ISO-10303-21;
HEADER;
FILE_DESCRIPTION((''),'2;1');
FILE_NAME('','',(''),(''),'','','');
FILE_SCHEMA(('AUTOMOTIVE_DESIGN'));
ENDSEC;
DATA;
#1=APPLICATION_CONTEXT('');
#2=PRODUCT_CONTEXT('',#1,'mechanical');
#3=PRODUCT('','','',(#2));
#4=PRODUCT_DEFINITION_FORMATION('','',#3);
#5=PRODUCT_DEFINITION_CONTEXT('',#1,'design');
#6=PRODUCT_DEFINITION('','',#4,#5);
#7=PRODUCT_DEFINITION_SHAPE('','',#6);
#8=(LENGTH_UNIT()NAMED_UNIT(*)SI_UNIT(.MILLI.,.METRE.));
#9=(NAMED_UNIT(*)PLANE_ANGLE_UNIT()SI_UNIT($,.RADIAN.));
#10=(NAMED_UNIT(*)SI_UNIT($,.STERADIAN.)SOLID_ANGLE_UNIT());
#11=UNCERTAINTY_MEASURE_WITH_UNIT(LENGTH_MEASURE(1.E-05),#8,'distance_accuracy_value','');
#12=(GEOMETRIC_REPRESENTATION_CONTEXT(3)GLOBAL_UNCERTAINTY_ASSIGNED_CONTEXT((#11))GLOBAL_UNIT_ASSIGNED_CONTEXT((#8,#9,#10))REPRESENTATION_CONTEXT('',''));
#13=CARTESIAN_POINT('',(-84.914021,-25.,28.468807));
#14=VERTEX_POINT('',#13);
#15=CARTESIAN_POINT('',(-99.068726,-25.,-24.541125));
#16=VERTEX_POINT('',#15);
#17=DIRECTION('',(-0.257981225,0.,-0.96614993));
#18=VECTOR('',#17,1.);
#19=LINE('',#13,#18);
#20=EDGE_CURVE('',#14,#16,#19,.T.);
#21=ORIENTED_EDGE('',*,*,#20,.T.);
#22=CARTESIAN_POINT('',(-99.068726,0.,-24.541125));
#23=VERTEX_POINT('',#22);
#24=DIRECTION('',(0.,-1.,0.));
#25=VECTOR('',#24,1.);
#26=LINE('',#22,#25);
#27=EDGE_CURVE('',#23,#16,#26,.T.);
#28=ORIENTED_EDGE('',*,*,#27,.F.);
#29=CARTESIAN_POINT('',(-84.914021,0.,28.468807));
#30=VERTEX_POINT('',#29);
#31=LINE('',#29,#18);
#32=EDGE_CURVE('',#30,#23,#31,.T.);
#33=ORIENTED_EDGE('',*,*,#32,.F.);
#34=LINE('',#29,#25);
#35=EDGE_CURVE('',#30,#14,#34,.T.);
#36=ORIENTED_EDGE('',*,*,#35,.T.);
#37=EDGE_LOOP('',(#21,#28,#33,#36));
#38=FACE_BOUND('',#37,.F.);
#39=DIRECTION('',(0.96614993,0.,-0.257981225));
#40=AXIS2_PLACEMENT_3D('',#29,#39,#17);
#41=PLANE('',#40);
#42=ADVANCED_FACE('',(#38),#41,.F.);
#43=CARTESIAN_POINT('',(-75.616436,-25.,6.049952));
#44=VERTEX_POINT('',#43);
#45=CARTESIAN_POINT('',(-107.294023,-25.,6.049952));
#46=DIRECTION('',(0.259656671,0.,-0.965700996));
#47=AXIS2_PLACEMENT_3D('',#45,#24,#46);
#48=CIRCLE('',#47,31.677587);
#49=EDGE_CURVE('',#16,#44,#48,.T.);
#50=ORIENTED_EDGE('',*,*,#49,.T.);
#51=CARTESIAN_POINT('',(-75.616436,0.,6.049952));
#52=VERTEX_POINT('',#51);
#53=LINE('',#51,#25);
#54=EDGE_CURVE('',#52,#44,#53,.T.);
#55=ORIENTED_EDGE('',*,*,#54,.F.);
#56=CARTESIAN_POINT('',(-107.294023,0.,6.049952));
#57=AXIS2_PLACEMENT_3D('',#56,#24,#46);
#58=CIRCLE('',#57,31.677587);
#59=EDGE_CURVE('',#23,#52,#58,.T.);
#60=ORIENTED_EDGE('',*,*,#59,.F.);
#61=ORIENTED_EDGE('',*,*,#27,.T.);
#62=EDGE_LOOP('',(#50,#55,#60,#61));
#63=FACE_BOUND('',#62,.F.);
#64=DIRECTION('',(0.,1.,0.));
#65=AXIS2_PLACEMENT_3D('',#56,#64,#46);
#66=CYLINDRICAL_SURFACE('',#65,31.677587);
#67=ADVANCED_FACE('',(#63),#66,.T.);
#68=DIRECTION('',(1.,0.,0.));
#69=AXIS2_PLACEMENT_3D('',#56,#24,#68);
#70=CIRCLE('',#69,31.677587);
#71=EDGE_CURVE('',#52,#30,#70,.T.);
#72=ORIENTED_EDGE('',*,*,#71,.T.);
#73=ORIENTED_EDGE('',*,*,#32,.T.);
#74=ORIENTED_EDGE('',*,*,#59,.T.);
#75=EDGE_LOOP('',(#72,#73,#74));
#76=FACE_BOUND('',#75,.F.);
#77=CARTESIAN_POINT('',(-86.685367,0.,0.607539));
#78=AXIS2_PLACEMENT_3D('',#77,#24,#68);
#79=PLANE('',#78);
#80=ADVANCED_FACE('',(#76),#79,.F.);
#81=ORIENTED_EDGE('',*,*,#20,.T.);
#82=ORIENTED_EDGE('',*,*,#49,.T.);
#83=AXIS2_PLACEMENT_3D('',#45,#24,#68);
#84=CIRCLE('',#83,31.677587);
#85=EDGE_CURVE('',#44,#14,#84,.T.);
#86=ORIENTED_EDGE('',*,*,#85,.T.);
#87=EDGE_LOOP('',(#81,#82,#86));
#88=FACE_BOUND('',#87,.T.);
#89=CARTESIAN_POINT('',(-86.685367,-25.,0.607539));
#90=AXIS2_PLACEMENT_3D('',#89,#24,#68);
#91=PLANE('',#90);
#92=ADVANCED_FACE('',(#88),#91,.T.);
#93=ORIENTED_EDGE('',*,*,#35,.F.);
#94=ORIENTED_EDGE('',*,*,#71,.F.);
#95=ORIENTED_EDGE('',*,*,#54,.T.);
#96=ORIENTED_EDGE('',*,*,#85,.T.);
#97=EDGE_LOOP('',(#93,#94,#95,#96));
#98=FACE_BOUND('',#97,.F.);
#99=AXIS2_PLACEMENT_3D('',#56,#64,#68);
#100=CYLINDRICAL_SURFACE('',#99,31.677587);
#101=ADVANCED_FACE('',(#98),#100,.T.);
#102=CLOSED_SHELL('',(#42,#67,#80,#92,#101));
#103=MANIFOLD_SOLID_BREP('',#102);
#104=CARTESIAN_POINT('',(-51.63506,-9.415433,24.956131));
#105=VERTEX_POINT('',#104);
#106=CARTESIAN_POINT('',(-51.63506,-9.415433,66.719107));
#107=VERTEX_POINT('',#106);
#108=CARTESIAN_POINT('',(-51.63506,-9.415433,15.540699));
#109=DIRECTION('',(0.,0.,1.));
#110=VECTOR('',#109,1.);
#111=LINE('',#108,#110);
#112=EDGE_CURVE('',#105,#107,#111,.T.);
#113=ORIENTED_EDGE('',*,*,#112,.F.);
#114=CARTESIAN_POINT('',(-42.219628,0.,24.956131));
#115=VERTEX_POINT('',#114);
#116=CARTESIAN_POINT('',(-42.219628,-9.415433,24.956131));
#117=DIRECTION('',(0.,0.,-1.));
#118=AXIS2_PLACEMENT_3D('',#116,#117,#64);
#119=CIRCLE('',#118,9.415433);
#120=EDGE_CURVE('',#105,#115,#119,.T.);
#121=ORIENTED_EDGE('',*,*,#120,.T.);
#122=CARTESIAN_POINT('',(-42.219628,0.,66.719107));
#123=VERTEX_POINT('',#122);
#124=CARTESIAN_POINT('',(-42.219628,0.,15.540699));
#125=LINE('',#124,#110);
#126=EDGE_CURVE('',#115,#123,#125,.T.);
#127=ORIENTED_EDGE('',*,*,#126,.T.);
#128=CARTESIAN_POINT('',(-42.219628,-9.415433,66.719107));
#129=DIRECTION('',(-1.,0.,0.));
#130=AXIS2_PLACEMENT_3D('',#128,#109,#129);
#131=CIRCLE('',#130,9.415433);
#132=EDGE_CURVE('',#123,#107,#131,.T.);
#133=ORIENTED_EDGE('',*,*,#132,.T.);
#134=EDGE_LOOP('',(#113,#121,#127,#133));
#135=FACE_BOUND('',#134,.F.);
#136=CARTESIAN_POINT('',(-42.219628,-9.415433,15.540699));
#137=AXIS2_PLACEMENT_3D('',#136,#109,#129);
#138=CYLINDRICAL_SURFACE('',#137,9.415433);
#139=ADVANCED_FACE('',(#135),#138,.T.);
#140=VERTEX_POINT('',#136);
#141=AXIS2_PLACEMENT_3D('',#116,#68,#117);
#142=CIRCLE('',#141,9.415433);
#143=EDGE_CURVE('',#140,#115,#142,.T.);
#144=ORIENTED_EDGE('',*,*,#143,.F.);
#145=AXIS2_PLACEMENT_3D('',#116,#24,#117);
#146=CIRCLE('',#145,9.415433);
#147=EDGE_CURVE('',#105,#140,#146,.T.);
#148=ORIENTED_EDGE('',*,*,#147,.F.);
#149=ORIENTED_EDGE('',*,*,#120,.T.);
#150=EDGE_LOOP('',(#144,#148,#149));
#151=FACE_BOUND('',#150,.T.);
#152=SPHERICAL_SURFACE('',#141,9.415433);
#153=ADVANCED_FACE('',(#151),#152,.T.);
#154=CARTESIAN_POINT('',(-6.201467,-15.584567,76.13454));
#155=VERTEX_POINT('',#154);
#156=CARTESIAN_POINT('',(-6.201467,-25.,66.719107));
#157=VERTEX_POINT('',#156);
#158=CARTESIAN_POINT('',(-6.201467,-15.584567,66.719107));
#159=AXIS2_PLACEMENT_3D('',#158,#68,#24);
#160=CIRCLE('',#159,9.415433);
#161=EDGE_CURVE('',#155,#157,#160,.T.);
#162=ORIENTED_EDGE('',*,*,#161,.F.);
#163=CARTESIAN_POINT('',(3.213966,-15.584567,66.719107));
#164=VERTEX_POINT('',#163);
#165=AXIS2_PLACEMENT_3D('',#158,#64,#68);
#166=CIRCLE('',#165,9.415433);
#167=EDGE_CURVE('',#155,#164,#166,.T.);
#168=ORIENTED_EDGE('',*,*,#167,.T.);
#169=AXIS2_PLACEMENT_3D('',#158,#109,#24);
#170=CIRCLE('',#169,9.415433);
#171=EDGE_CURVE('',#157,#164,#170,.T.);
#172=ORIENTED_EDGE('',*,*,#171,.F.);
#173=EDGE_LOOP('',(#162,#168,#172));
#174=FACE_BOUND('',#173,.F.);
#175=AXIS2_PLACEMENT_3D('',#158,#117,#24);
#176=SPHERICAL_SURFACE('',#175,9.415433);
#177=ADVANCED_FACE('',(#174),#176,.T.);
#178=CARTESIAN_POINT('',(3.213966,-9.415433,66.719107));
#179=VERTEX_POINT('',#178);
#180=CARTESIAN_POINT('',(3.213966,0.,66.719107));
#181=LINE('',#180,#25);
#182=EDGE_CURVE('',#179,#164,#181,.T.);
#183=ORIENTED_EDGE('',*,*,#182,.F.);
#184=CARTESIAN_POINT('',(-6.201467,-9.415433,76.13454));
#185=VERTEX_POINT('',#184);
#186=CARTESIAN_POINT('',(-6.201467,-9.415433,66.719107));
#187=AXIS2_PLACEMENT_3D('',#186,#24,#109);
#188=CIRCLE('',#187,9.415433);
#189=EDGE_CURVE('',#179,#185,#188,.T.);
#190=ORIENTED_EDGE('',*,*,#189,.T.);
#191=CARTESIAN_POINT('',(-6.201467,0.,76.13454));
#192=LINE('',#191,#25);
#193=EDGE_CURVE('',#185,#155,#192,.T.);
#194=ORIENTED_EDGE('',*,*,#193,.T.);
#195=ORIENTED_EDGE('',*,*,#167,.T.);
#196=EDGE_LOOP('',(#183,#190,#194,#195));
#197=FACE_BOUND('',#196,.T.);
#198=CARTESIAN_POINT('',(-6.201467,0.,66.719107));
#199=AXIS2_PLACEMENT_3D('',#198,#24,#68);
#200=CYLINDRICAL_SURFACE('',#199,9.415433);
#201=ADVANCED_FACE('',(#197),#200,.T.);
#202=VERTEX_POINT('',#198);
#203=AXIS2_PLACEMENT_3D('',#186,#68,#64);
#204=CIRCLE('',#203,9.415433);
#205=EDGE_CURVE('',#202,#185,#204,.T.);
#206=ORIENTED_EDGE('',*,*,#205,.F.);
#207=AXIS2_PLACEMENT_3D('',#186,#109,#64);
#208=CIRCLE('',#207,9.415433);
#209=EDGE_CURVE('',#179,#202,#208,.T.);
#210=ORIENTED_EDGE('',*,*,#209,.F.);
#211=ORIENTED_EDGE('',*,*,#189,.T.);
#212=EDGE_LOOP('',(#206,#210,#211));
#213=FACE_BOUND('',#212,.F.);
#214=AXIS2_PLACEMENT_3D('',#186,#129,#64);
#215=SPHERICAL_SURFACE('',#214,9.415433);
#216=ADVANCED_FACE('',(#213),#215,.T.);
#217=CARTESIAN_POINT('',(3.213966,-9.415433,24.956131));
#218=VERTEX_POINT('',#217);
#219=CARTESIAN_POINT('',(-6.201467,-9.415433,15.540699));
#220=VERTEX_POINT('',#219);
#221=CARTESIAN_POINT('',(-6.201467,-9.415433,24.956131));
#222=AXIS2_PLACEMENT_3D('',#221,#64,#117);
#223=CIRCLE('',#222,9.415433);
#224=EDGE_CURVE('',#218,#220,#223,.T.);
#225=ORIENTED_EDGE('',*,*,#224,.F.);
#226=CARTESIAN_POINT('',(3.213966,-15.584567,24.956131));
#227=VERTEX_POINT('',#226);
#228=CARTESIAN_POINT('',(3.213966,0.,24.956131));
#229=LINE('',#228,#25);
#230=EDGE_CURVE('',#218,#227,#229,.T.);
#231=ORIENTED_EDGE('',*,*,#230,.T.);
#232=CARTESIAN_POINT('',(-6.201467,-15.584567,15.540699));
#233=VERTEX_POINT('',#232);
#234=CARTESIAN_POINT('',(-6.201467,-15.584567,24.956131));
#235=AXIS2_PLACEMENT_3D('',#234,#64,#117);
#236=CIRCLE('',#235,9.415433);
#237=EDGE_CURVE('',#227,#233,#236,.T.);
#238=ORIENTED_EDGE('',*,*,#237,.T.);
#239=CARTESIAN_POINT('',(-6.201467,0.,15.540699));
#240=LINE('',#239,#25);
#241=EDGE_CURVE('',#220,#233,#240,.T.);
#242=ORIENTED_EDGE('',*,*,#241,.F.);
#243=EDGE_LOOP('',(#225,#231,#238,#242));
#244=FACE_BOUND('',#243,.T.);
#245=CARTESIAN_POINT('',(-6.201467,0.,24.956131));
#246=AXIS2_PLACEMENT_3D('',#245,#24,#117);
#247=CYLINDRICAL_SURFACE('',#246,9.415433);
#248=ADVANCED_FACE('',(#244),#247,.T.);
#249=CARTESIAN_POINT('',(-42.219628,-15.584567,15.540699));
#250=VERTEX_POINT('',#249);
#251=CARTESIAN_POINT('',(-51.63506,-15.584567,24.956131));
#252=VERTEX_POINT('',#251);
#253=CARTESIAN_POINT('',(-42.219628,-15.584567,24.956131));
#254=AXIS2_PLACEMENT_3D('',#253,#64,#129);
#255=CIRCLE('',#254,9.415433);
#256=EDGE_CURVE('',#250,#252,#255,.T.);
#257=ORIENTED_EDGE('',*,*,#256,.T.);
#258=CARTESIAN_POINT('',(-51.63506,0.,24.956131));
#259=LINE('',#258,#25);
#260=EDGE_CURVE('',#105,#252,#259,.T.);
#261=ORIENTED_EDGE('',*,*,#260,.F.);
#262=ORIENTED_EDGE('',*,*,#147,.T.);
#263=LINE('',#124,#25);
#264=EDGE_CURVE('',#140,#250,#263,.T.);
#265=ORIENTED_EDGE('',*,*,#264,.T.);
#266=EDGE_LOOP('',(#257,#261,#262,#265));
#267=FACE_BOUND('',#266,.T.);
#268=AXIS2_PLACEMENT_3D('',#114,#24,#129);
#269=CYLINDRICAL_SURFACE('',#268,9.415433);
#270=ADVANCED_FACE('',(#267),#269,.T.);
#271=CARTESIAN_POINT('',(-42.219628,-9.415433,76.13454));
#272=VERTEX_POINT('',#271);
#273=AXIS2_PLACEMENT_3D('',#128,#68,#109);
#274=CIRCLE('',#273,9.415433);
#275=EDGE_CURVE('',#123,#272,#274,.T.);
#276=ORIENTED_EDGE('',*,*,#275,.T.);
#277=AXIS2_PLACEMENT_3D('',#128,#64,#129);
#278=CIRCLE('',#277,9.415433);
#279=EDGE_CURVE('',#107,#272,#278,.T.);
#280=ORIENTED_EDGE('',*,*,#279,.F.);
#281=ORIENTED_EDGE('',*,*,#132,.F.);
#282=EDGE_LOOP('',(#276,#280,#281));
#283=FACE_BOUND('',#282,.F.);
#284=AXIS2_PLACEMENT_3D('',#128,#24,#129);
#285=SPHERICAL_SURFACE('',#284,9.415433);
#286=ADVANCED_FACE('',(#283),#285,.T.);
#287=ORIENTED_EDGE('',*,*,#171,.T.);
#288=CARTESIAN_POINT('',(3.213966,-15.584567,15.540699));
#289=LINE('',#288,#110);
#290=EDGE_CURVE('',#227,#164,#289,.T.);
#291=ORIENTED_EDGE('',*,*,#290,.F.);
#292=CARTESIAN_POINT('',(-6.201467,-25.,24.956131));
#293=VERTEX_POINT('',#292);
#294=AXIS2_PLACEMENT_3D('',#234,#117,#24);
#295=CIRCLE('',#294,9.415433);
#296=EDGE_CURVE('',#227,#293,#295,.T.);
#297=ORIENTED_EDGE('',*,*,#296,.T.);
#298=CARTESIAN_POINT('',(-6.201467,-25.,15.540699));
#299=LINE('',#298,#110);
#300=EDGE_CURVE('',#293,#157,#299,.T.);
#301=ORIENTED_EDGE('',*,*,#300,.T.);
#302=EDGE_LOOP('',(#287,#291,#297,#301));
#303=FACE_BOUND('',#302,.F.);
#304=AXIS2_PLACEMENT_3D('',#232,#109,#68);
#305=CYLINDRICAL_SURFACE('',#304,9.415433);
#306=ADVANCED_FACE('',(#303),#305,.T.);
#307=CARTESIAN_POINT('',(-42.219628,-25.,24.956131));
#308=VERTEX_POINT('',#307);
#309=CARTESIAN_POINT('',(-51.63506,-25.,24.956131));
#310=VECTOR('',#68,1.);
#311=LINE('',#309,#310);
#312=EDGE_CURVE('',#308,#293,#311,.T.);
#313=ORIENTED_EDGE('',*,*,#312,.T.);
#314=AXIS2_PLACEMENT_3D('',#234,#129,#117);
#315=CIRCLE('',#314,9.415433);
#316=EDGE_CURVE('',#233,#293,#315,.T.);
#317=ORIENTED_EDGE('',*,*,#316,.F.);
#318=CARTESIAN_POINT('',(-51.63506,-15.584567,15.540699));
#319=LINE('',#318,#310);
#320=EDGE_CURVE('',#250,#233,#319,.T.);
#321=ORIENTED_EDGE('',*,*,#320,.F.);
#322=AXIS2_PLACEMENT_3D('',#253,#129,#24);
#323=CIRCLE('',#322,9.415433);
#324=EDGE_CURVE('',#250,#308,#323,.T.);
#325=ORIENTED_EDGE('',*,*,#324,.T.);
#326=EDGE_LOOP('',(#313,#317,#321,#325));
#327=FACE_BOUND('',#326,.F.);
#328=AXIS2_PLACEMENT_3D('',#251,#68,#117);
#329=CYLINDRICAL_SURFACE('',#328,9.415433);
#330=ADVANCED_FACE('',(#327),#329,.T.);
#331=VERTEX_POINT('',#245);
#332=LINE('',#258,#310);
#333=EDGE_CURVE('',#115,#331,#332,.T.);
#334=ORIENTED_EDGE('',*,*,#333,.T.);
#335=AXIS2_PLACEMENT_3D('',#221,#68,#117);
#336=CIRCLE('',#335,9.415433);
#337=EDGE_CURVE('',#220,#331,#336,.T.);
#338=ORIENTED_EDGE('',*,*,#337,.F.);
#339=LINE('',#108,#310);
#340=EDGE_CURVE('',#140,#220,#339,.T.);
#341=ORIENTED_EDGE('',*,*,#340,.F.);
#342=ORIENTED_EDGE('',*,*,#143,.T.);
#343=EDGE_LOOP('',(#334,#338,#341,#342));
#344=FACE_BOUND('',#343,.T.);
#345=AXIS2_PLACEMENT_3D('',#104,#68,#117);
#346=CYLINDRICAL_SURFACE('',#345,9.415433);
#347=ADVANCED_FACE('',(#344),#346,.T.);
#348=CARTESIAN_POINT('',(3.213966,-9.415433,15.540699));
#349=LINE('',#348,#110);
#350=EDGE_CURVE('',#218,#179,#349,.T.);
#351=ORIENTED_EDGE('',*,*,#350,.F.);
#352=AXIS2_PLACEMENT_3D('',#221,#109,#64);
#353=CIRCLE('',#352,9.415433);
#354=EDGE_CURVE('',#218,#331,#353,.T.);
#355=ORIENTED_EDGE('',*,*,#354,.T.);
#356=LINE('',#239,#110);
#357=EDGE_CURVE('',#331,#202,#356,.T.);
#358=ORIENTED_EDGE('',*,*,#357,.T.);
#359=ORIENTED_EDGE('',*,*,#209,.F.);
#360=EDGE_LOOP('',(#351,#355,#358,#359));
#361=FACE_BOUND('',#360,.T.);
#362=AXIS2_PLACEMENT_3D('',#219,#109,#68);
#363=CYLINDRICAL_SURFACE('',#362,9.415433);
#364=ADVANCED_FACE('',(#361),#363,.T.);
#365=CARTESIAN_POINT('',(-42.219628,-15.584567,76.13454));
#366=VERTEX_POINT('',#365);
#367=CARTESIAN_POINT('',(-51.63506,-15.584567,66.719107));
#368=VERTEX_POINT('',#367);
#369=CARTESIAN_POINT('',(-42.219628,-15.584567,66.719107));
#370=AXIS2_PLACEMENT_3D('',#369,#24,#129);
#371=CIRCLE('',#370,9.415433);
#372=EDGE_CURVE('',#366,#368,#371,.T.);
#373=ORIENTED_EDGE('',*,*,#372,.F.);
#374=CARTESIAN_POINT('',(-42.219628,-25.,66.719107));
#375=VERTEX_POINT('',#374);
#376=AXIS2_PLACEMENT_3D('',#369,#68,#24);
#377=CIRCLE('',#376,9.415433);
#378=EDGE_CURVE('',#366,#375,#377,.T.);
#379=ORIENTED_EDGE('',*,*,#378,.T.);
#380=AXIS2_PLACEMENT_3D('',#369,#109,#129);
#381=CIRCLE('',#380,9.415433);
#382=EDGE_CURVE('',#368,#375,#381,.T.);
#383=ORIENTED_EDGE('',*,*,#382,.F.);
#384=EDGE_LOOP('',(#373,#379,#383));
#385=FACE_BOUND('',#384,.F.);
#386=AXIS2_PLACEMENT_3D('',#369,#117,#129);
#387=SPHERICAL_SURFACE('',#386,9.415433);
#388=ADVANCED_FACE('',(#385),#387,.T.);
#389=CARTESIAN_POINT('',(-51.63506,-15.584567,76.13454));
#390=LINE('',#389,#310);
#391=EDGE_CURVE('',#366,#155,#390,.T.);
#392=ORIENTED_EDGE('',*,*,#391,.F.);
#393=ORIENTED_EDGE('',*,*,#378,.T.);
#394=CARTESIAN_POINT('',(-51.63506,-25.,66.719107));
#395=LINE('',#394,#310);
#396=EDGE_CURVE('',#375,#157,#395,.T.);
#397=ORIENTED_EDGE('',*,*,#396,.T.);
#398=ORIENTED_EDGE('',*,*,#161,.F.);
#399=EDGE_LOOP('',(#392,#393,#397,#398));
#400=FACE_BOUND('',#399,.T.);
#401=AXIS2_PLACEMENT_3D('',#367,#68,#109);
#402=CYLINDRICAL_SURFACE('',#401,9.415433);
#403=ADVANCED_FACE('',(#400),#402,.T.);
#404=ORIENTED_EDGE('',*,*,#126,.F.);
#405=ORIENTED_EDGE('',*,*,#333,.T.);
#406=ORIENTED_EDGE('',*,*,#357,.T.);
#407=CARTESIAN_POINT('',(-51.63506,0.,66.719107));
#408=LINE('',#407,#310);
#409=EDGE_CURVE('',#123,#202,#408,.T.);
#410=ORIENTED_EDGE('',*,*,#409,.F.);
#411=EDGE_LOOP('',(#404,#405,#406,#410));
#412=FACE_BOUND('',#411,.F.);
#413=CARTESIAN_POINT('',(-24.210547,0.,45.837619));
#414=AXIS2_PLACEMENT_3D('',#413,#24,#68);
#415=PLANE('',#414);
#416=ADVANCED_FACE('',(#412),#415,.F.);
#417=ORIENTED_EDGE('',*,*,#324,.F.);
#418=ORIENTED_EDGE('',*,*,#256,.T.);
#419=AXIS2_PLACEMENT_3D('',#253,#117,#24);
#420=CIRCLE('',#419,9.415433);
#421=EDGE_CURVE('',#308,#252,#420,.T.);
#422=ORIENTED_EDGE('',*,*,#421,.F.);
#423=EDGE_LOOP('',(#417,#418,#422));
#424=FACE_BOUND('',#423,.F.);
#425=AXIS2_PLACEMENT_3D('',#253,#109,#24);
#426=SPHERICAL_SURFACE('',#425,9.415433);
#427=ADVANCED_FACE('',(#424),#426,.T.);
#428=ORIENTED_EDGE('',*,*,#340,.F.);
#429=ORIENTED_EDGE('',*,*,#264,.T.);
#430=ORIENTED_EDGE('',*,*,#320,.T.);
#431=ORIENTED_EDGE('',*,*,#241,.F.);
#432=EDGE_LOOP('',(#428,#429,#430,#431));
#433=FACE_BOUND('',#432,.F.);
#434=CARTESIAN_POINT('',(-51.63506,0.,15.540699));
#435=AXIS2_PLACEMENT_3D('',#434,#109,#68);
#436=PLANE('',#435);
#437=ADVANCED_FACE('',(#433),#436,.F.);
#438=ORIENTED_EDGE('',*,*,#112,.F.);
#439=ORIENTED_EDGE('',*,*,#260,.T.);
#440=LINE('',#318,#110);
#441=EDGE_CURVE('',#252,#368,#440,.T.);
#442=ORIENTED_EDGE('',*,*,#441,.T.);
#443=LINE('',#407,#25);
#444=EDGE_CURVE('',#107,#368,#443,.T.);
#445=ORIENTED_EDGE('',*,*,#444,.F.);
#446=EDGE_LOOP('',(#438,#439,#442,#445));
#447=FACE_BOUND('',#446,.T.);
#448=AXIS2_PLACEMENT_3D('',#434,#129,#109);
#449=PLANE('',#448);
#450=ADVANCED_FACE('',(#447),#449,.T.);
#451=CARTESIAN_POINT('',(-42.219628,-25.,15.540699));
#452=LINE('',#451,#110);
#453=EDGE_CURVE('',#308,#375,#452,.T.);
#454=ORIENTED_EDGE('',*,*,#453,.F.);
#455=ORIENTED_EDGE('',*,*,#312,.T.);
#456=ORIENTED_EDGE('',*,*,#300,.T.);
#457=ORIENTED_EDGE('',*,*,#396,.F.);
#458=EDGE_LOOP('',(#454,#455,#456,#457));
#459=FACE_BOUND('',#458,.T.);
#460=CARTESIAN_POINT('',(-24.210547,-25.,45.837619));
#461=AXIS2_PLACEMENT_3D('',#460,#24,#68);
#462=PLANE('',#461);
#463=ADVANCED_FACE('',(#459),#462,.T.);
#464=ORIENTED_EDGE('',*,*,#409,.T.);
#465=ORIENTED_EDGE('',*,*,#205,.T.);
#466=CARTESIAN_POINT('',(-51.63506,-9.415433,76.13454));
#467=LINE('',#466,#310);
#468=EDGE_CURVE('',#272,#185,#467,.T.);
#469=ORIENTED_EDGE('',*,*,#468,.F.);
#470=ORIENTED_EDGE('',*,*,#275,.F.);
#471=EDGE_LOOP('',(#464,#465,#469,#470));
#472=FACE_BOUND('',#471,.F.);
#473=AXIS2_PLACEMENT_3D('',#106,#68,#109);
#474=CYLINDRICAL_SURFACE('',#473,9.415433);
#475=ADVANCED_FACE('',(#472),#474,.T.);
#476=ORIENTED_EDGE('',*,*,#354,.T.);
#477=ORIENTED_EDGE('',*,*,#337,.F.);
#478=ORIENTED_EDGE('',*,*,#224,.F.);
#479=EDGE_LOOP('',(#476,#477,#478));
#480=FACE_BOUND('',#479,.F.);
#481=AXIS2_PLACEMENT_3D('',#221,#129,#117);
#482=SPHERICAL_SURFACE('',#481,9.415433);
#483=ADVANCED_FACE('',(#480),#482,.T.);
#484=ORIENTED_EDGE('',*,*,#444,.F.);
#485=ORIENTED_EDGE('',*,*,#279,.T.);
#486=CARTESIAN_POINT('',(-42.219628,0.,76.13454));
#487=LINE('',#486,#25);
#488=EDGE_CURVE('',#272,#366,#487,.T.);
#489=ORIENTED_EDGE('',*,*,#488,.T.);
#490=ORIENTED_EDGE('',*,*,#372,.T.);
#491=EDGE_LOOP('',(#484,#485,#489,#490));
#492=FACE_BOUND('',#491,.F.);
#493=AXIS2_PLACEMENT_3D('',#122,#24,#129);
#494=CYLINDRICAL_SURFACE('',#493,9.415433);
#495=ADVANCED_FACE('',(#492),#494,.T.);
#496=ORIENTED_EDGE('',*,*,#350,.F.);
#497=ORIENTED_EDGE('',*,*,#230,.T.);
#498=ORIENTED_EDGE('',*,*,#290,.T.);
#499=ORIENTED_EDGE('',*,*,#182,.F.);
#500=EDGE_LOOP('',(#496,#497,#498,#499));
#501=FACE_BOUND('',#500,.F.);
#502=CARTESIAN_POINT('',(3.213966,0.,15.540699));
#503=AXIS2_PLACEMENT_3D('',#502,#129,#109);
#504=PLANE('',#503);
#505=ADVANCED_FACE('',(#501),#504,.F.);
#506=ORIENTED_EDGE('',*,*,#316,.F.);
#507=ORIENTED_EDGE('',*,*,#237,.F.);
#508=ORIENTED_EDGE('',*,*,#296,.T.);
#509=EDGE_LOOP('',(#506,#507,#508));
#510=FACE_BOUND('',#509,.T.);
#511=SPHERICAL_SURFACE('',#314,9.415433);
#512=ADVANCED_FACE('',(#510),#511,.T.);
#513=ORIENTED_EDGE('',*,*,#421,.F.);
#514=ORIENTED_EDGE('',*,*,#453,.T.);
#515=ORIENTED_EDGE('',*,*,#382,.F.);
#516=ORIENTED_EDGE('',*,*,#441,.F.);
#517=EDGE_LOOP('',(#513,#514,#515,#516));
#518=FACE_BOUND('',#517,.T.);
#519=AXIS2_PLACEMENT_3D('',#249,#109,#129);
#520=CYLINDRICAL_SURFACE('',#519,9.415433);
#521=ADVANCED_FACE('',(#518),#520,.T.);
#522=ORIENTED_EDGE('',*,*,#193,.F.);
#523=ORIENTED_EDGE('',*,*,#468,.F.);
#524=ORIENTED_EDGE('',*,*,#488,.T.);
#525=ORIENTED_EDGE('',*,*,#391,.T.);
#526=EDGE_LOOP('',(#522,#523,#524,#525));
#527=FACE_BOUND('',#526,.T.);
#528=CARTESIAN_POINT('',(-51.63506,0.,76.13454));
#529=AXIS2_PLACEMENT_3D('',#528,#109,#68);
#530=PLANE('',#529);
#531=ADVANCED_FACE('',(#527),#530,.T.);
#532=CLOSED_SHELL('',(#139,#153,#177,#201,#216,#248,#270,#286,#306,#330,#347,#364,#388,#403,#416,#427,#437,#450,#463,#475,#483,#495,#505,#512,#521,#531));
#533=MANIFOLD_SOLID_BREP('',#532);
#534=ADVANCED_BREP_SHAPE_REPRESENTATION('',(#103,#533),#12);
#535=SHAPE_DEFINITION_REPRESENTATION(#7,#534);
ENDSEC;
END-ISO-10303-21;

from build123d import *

# Parameters (mm, degrees)
F2_DEPTH = 25
F3_W     = 54.8490260262
F3_H     = 60.5938415974
F4_DEPTH = 25
F5_R     = 9.4154328933


# Not quite as in the source:
# - the program builds the solid bodies; features that only make, move or delete a surface that nothing else refers to are left out


with BuildPart() as f2:
    # F0 (on Front) → F2 (new body)
    with BuildSketch(Plane.XZ):
        with BuildLine():
            ThreePointArc((-99.0687261738, -24.5411251405), (-82.1541433894, -13.2232410682), (-75.616435726, 6.0499524698))
            ThreePointArc((-75.616435726, 6.0499524698), (-78.0330079972, 18.1851301237), (-84.9140211289, 28.4688073121))
            Line((-84.9140211289, 28.4688073121), (-99.0687261738, -24.5411251405))
        make_face()
    extrude(amount=F2_DEPTH)


with BuildPart() as f4:
    # F3 (on Front) → F4 (new body)
    with BuildSketch(Plane.XZ):
        with Locations((-24.2105474463, 45.8376193419)):
            Rectangle(F3_W, F3_H)
    extrude(amount=F4_DEPTH)

    # F5
    f5_edges = [f4.edges().sort_by_distance(p)[0] for p in [
        (-51.63506, -25, 45.837619),
        (-24.210547, -25, 15.540699),
        (-24.210547, 0, 15.540699),
        (3.213966, -12.5, 15.540699),
        (-51.63506, -12.5, 15.540699),
        (-51.63506, -12.5, 76.13454),
        (3.213966, -25, 45.837619),
        (-51.63506, 0, 45.837619),
        (-24.210547, -25, 76.13454),
        (-24.210547, 0, 76.13454),
        (3.213966, 0, 45.837619),
        (3.213966, -12.5, 76.13454),
    ]]
    fillet(f5_edges, radius=F5_R)


solid = Compound([f2.part, f4.part])
